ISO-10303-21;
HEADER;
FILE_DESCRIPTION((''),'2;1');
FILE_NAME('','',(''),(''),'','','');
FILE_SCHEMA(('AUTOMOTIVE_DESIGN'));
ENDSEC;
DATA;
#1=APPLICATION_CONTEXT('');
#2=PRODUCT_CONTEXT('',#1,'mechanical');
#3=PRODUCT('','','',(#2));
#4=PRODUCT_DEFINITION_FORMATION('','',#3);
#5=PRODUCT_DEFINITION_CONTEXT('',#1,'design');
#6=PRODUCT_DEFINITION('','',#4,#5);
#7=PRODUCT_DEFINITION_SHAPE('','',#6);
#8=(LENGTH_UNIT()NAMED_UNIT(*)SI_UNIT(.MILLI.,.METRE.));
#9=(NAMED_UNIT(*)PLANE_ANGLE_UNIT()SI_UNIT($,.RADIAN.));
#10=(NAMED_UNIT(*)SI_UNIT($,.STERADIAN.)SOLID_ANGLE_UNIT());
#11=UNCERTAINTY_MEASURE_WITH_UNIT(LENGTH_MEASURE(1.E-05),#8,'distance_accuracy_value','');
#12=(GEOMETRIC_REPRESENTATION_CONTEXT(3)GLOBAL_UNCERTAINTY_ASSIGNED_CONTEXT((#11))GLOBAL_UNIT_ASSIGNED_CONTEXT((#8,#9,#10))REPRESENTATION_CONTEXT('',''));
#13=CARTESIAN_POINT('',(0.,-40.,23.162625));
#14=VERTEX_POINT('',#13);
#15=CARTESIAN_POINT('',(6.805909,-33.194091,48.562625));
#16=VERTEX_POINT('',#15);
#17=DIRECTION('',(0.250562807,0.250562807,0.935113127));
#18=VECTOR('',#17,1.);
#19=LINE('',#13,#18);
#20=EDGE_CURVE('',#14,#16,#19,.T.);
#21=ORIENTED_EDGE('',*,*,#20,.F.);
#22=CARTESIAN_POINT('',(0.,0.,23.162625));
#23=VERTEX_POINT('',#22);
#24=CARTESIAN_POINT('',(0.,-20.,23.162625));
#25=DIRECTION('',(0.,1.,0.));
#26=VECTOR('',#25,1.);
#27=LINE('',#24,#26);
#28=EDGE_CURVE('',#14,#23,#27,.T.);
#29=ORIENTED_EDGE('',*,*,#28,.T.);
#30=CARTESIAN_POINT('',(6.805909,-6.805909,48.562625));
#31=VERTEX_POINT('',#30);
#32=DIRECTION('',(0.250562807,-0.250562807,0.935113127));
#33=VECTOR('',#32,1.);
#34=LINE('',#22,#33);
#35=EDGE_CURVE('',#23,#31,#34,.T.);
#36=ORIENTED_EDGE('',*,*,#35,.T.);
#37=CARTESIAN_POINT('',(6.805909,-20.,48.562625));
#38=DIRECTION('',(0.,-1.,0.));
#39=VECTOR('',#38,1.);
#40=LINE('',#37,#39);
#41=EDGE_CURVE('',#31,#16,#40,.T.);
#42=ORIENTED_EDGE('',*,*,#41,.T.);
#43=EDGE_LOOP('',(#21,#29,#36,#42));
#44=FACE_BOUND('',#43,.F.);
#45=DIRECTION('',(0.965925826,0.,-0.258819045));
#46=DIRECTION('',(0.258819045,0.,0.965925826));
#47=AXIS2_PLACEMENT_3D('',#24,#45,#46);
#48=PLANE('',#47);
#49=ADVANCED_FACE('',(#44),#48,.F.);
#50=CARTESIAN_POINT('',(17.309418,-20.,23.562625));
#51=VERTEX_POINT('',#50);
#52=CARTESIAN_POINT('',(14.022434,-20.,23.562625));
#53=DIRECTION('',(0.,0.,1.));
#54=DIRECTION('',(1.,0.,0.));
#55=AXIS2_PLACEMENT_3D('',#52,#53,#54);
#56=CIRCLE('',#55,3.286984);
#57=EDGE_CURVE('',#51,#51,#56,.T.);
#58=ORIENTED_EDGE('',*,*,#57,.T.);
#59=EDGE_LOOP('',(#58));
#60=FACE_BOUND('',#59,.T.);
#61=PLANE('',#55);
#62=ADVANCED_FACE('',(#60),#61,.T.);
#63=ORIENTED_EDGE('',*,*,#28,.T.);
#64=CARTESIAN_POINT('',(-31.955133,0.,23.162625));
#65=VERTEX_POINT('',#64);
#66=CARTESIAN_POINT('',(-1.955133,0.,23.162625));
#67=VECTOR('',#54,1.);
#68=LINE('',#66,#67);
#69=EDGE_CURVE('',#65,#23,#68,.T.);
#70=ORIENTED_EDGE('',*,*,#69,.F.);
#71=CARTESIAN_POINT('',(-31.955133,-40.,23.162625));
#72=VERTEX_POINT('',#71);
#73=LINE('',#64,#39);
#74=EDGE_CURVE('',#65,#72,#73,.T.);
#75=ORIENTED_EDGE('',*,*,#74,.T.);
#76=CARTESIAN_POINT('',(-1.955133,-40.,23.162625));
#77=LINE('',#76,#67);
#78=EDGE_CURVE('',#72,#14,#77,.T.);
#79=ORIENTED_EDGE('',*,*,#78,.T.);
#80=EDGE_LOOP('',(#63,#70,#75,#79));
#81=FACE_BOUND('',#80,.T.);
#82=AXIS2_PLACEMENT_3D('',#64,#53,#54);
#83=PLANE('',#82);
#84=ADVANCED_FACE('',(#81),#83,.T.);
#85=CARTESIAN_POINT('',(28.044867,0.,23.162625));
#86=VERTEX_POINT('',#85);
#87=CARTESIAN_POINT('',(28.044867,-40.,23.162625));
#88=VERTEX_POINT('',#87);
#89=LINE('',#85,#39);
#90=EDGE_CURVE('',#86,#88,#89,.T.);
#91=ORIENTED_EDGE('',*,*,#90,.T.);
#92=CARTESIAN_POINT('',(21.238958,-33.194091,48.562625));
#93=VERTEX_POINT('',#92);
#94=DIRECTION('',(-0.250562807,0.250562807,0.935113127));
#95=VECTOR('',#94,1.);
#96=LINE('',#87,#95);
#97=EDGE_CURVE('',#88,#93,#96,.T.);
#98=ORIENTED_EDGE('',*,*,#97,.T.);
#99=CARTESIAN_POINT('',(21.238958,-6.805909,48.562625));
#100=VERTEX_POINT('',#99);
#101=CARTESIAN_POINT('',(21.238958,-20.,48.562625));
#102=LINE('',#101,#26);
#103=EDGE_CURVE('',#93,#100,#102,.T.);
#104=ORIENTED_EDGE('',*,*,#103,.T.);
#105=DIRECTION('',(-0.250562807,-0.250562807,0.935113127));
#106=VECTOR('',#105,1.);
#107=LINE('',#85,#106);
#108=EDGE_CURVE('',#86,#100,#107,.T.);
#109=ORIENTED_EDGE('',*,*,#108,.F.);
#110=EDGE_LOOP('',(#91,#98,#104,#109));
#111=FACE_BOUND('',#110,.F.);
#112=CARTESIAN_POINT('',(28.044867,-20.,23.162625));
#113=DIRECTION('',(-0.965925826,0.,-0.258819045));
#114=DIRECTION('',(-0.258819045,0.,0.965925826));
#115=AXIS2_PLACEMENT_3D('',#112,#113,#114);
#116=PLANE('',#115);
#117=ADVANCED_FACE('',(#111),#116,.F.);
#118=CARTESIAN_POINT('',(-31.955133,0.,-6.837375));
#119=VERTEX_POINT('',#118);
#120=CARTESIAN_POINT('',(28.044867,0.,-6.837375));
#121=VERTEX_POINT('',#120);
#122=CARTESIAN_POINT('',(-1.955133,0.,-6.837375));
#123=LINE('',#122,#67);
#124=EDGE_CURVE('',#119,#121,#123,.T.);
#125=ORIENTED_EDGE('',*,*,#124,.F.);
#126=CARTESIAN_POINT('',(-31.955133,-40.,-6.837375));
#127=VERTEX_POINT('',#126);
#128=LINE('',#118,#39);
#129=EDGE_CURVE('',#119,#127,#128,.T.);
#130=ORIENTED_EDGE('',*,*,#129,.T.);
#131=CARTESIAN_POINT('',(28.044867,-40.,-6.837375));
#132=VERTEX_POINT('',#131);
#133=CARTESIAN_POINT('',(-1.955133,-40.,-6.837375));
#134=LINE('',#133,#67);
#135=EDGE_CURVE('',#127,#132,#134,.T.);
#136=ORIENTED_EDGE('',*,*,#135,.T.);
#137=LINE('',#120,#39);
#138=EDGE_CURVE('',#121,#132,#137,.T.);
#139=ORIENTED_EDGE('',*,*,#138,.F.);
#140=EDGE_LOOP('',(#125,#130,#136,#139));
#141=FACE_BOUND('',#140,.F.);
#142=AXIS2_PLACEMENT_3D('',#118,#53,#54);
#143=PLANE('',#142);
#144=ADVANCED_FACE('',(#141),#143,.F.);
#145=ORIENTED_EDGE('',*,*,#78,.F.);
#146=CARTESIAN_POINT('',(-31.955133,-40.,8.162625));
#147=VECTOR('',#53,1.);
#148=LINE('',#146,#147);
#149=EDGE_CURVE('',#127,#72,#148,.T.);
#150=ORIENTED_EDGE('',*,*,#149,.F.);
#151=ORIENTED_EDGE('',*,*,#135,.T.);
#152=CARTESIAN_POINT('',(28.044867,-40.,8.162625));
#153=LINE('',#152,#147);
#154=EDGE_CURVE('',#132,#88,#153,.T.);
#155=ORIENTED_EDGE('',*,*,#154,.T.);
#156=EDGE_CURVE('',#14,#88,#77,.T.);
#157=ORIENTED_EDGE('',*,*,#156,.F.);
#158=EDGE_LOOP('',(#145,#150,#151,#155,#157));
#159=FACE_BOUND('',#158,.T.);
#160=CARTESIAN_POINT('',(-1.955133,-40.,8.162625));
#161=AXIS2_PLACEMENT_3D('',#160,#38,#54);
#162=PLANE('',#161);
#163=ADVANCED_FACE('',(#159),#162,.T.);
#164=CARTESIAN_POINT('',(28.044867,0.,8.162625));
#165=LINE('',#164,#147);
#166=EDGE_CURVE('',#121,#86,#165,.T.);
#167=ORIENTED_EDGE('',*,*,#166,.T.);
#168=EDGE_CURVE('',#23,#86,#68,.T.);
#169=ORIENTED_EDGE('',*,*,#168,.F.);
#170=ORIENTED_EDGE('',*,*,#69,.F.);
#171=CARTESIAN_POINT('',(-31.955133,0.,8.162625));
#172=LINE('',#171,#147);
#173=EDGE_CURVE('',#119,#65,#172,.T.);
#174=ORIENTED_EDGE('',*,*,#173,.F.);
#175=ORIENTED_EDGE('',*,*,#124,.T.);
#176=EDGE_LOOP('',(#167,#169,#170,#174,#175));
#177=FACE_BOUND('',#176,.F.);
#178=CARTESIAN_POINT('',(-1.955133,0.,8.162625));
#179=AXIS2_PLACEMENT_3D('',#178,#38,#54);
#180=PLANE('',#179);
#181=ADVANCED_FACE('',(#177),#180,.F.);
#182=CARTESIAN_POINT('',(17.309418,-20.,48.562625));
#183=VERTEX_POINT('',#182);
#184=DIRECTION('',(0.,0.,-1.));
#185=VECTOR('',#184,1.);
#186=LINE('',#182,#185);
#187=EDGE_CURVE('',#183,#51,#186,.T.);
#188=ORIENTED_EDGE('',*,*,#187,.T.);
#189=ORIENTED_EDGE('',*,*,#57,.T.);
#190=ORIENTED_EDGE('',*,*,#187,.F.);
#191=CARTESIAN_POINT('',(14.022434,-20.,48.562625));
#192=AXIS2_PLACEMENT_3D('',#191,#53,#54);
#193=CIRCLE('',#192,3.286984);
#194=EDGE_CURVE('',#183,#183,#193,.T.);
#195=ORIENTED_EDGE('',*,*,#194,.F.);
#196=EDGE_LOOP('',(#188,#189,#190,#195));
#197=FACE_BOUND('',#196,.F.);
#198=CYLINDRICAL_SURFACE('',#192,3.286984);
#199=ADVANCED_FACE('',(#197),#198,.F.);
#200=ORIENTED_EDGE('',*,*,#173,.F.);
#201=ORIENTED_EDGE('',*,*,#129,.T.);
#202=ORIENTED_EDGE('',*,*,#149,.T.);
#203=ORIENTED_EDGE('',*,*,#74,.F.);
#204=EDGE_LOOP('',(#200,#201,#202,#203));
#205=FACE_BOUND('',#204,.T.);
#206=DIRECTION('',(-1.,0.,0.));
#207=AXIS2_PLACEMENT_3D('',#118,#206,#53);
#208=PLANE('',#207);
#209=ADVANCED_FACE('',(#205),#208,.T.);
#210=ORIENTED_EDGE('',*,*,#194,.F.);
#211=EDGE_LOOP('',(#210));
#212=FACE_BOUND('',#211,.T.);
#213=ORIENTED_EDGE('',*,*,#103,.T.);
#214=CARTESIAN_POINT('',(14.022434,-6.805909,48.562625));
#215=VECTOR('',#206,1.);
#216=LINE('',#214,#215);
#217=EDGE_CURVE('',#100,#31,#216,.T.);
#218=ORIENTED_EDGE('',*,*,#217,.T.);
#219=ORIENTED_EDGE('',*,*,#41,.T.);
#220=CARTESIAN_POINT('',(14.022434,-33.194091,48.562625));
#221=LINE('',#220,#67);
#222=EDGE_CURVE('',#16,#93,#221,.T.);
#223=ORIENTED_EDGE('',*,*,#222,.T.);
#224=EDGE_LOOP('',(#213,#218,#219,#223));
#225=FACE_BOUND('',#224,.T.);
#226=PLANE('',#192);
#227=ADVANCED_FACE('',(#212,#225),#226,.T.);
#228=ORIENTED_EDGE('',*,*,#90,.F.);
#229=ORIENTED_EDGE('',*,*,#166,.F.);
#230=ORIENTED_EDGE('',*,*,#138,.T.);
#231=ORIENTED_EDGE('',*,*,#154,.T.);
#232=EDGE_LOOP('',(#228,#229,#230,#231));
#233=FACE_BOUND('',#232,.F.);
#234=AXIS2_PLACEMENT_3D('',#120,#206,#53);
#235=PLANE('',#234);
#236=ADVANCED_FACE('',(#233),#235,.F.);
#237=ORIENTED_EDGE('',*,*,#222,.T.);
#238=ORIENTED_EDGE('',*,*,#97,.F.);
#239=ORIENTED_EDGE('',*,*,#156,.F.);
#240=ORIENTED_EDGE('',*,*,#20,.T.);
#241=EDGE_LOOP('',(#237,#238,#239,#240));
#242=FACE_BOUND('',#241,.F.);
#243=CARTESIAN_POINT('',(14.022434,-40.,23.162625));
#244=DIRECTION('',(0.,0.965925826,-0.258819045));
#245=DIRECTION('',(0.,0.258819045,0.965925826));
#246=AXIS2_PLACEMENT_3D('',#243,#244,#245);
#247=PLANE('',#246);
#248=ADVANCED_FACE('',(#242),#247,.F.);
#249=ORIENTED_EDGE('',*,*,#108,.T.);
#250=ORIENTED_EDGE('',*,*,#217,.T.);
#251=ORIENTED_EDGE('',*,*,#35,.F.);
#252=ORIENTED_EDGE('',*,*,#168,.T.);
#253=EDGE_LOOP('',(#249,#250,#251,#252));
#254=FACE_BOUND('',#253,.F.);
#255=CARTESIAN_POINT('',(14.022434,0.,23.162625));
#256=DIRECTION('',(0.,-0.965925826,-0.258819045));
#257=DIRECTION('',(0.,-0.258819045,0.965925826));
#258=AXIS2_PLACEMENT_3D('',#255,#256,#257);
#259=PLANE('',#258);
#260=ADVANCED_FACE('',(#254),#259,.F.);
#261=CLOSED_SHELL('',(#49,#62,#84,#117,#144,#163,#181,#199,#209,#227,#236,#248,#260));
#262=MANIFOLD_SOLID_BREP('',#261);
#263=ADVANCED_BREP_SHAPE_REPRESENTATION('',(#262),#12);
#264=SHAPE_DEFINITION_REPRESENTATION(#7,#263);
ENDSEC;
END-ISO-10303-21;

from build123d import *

# Parameters (mm, degrees)
F0_W     = 60
F0_H     = 30
F1_DEPTH = 40
F2_W     = 28.0448670685
F2_H     = 40
F3_DEPTH = 25.4
F3_TAPER = 15
F4_R     = 3.2869844705
F5_DEPTH = 25


# Not quite as in the source:
# - a feature names something its author has since deleted; it is built from what else it names


with BuildPart() as f1:
    # F0 (on Front) → F1 (new body)
    with BuildSketch(Plane.XZ):
        with Locations((-1.9551329315, 8.1626253676)):
            Rectangle(F0_W, F0_H)
    extrude(amount=F1_DEPTH)

    # F2 (on face) → F3 (join)
    with BuildSketch(Plane.XY.offset(23.1626253676)):
        with Locations((14.0224335343, -20)):
            Rectangle(F2_W, F2_H)
    extrude(amount=F3_DEPTH, taper=F3_TAPER)

    # F4 (on face) → F5 (cut)
    with BuildSketch(Plane.XY.offset(48.5626253676)):
        with Locations((14.0224335343, -20)):
            Circle(F4_R)
    extrude(amount=-F5_DEPTH, mode=Mode.SUBTRACT)


solid = f1.part
